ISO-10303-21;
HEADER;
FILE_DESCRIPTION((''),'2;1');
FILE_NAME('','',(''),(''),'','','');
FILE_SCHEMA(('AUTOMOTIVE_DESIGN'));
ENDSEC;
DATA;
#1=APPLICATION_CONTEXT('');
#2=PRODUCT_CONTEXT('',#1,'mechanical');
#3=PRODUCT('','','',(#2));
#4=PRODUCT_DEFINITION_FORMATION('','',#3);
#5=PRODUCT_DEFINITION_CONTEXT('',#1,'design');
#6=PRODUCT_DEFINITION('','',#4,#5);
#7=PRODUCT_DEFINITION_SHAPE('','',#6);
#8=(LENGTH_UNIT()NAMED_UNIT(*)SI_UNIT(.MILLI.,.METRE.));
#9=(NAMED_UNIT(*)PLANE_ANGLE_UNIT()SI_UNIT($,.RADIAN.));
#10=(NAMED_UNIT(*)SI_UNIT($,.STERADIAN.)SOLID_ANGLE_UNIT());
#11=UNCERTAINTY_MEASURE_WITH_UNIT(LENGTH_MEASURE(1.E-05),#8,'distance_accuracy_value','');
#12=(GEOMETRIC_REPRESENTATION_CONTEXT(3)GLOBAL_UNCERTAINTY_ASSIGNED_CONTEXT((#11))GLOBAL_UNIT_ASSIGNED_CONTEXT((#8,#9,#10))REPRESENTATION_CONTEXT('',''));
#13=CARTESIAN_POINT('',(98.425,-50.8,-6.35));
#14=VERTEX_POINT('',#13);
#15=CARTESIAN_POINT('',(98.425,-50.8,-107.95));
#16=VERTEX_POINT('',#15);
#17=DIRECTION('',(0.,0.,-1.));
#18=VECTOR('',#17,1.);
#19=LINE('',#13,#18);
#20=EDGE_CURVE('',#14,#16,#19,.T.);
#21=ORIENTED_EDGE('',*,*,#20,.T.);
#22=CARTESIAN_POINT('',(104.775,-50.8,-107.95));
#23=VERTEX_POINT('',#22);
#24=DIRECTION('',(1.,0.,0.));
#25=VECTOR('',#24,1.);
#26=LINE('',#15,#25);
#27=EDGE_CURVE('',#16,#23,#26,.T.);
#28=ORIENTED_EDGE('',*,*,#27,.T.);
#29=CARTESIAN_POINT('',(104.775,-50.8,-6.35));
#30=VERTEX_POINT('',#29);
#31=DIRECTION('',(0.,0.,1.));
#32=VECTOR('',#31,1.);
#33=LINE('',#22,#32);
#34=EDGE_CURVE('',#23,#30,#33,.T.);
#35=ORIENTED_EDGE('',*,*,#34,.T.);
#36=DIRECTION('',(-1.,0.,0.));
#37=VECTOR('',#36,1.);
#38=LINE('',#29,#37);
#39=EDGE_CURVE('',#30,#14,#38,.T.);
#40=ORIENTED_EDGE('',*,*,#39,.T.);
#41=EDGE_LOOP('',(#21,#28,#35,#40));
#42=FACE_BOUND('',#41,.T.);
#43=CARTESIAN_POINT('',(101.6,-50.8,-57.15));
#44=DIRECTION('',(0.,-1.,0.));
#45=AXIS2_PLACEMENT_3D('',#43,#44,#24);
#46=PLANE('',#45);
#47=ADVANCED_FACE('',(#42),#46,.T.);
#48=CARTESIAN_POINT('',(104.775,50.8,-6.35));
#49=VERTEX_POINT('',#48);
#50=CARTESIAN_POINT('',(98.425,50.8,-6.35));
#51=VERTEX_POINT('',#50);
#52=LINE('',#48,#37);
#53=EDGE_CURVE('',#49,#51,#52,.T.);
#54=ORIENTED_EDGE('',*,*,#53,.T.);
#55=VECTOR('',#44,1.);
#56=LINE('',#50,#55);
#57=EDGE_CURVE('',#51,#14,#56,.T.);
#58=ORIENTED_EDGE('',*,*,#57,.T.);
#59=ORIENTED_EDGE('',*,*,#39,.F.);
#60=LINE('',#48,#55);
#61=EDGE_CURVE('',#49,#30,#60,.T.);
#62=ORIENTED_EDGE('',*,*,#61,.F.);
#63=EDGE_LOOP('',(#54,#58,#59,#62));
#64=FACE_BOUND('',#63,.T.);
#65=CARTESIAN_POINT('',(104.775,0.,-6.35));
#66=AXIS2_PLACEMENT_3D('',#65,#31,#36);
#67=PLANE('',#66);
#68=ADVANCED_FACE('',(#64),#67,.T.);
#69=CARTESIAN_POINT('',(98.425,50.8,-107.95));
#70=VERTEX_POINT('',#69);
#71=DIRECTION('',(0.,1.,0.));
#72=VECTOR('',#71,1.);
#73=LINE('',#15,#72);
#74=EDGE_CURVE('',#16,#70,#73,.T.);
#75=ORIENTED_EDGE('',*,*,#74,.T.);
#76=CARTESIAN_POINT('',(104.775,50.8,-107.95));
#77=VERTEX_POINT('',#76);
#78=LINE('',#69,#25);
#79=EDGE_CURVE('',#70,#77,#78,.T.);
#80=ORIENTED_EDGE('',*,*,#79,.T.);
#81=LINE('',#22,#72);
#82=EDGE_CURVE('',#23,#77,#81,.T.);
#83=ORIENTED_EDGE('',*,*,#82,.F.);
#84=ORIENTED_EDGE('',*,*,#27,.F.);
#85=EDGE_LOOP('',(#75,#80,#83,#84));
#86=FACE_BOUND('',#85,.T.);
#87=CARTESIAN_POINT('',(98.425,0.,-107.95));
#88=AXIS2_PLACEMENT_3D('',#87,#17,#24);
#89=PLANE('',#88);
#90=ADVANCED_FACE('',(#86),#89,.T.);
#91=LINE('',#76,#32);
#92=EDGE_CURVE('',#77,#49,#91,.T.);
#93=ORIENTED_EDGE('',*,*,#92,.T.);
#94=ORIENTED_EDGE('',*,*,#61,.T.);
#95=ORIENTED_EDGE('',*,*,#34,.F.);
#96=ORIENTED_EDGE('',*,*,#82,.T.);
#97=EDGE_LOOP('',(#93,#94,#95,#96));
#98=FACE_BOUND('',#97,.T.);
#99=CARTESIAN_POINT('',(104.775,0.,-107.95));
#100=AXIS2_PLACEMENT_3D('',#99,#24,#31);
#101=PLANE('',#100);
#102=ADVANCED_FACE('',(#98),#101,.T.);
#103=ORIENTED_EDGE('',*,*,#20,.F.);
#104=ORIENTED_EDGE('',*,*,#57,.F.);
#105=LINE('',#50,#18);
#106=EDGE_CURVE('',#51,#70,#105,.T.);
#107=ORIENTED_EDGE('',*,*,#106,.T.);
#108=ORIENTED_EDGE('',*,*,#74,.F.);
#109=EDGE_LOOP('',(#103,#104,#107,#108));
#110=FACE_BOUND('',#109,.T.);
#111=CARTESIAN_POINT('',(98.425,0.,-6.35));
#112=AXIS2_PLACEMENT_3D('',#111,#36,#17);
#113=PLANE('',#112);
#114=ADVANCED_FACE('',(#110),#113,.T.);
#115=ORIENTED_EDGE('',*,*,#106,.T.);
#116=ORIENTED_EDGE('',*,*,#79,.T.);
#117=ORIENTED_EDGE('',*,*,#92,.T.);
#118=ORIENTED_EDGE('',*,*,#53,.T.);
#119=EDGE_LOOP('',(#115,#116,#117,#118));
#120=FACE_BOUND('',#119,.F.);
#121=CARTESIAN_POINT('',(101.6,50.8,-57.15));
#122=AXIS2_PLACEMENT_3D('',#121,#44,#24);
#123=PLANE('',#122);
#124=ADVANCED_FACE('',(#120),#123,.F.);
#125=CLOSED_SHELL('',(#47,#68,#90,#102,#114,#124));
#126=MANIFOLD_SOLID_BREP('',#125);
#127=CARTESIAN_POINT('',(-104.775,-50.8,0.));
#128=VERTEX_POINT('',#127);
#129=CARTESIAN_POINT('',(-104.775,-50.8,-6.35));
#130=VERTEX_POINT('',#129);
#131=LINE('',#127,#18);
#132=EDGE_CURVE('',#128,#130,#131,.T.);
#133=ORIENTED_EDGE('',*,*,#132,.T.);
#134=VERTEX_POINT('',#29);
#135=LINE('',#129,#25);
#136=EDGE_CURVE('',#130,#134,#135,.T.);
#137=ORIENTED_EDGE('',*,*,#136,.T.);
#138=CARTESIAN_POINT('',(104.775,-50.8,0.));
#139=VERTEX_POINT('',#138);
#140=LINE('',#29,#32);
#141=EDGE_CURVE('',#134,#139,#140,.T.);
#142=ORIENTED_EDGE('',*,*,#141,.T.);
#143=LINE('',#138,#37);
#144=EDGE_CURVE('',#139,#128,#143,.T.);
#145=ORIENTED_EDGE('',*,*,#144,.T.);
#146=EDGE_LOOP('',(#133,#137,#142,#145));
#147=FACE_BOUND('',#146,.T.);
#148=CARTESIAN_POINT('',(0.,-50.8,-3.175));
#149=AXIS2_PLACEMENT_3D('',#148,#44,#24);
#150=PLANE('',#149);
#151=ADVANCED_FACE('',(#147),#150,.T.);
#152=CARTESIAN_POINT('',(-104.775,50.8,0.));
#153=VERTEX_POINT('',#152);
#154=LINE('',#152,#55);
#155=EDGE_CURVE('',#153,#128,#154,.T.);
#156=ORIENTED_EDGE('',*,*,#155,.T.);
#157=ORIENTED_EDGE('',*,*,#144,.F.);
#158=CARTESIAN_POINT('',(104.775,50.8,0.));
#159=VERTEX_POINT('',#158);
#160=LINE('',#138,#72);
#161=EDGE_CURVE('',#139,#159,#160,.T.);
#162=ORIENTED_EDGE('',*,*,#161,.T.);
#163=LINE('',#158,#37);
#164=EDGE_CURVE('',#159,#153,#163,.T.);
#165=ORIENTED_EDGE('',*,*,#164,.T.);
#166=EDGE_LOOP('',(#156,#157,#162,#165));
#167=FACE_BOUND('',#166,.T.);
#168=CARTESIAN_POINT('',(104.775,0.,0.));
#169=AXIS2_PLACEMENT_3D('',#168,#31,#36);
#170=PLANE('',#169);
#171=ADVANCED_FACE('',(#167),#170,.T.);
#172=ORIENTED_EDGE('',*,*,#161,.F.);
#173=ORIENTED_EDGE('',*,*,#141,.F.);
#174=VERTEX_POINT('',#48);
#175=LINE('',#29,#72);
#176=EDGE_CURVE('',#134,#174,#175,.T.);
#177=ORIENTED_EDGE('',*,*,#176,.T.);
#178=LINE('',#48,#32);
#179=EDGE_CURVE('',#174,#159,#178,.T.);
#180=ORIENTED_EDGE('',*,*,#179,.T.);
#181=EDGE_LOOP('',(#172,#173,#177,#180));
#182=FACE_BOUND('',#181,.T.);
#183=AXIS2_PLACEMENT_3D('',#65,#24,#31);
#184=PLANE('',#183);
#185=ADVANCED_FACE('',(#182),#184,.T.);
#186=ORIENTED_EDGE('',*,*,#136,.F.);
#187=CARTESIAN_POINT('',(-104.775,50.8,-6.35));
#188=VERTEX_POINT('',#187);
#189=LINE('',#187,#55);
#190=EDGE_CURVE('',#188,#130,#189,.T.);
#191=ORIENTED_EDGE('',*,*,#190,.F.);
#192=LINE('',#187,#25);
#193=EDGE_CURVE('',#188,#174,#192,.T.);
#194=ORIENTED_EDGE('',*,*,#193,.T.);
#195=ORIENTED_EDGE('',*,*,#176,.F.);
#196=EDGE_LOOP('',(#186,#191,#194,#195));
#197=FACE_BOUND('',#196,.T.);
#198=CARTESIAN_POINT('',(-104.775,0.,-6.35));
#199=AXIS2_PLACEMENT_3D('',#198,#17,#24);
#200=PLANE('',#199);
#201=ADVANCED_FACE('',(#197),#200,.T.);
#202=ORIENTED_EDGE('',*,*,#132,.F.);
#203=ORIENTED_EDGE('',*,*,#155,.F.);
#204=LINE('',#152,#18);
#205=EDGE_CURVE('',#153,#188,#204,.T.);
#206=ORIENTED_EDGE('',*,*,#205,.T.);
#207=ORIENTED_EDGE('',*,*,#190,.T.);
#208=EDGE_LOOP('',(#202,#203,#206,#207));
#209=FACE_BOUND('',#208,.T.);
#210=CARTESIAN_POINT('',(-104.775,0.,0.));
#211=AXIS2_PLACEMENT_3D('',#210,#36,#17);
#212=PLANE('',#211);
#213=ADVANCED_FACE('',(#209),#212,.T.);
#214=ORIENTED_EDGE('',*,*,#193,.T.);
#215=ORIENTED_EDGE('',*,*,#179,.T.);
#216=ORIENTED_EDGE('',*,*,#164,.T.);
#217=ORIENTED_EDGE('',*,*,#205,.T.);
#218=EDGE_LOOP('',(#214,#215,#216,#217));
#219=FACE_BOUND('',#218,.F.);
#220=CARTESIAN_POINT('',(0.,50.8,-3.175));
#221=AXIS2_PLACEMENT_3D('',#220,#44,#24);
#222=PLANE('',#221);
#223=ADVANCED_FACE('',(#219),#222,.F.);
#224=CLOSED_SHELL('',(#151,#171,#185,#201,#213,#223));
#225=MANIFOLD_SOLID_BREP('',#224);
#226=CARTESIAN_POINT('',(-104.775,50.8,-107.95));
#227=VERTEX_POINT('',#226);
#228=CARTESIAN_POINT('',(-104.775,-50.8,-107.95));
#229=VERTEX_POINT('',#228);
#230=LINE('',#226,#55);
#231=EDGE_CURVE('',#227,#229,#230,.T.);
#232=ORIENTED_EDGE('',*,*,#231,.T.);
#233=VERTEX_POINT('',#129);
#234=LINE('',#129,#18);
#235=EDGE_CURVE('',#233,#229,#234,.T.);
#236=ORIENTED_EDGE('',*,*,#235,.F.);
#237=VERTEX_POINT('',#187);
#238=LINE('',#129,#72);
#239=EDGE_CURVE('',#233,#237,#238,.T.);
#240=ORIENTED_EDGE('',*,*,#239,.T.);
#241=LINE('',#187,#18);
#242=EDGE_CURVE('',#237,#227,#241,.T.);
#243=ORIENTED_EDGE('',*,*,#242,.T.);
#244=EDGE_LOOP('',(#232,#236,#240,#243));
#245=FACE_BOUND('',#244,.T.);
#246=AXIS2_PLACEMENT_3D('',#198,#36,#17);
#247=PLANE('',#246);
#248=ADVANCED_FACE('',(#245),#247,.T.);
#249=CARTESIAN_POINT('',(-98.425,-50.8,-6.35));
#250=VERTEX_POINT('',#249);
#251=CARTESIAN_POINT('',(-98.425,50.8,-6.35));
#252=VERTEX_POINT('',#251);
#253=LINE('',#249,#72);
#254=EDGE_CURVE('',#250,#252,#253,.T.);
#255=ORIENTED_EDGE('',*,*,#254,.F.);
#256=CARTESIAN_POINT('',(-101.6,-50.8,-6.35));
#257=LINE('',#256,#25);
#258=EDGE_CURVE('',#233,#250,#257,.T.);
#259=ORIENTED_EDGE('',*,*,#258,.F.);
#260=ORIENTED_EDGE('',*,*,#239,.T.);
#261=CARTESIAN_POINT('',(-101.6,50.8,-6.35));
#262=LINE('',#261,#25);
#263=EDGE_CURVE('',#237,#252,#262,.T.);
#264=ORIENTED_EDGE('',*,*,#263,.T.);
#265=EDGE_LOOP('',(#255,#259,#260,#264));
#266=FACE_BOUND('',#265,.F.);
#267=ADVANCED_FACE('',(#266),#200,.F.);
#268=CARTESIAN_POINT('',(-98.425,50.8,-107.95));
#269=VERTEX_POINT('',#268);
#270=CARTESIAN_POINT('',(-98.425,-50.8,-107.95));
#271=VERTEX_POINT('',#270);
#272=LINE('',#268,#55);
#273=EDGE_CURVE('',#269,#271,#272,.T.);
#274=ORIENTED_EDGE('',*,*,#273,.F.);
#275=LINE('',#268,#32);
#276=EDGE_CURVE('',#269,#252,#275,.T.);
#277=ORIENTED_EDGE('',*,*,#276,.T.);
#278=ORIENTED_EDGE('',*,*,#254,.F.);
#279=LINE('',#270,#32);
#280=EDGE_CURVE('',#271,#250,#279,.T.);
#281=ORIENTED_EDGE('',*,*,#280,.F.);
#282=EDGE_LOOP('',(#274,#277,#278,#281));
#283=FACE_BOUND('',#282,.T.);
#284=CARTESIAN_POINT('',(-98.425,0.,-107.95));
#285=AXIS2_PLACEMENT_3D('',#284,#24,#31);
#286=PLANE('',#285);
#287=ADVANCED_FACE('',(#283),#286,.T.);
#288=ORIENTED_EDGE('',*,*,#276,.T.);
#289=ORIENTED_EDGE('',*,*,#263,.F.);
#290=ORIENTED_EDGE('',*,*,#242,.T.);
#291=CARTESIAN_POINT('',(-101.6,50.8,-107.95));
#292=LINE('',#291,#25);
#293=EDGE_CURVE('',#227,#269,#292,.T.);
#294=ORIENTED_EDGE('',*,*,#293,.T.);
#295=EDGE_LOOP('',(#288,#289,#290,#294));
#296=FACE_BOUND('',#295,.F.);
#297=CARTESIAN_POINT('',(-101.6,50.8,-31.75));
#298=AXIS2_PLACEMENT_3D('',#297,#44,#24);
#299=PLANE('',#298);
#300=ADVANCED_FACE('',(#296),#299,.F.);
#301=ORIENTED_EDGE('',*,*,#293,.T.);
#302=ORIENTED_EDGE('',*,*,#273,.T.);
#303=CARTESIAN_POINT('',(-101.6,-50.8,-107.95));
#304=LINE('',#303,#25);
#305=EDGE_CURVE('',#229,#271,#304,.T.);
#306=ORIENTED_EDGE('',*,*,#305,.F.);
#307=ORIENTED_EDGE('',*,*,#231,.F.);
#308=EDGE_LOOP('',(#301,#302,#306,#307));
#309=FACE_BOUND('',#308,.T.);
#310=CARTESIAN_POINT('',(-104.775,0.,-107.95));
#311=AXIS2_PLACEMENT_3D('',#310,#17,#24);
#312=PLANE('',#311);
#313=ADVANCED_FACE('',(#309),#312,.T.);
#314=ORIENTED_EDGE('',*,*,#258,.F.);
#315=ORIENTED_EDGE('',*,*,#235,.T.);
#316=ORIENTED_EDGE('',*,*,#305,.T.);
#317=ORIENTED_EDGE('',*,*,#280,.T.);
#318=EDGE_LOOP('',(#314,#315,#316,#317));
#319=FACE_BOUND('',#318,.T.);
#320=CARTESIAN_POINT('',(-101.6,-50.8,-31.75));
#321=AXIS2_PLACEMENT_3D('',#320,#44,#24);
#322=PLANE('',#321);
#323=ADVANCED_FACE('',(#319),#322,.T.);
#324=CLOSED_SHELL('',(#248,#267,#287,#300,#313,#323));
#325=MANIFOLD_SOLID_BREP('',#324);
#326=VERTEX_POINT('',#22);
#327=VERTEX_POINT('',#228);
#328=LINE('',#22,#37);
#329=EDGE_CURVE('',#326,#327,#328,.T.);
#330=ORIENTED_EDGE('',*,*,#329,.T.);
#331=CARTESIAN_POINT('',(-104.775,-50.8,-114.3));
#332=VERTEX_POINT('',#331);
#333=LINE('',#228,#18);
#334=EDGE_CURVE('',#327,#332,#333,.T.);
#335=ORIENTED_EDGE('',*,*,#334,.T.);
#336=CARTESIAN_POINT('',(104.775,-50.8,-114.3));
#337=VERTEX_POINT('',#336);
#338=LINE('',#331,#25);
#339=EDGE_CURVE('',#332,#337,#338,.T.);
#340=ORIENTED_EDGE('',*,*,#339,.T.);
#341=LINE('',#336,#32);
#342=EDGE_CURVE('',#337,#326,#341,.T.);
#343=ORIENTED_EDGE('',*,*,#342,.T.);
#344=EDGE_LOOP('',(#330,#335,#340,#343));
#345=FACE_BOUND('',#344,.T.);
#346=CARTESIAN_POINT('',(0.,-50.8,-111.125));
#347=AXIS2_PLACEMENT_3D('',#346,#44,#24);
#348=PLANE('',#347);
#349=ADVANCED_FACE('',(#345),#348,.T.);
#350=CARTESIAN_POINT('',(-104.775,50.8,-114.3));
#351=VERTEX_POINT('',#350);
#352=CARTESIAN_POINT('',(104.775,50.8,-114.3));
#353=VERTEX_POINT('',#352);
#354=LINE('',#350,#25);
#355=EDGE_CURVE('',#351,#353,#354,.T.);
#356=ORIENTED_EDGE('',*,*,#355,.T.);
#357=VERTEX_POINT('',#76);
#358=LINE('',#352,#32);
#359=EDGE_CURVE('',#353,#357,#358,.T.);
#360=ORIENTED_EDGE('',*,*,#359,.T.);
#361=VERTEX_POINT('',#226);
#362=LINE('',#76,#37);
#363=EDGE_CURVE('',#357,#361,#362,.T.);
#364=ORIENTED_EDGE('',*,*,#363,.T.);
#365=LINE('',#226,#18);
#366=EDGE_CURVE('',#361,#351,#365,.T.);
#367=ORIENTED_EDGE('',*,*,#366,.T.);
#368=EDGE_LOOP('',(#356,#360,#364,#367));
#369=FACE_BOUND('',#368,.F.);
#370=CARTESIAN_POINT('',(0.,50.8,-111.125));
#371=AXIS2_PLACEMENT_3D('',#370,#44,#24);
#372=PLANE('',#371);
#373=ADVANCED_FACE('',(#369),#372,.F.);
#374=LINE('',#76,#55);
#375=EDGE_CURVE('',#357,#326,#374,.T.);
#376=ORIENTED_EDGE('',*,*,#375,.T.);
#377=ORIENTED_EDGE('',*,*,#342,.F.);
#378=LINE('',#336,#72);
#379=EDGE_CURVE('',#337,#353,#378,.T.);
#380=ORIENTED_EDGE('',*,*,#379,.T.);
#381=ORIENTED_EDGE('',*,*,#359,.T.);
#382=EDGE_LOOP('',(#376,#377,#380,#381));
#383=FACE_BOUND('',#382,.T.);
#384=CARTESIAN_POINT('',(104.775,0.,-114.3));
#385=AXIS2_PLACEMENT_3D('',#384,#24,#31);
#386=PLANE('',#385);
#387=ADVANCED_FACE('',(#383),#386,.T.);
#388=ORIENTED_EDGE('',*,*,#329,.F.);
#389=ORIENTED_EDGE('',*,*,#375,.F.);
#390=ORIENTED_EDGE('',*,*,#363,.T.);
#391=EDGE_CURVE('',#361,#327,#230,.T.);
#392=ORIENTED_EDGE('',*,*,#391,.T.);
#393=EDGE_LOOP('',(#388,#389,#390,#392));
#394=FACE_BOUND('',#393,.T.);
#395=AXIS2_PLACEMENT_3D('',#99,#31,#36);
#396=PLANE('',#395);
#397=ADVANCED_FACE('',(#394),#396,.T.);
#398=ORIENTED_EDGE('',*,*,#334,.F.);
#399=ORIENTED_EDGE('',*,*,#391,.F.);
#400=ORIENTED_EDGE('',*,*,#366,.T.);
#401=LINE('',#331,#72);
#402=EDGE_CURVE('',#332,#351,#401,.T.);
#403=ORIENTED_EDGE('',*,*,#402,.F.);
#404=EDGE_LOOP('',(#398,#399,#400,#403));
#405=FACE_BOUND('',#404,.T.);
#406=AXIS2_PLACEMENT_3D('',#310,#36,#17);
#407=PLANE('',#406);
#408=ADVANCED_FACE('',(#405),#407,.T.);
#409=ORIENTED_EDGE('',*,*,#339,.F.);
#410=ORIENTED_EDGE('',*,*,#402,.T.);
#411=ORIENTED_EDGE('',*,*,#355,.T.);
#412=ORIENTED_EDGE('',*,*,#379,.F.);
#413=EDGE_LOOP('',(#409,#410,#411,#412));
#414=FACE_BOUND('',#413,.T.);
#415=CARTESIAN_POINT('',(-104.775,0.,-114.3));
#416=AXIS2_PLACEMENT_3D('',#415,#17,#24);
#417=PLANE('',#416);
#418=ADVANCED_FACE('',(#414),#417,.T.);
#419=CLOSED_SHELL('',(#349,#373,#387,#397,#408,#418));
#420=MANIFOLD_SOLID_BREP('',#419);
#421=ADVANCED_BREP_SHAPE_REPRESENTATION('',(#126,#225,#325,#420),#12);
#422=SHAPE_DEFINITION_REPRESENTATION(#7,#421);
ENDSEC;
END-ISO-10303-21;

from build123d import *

# Parameters (mm, degrees)
F2_DEPTH      = 50.8
F1_W          = 6.35
F1_H          = 50.8
F3_DEPTH      = 50.8
F3_DEPTH_BACK = 50.8


# Not quite as in the source:
# - a variable given as a bare number and used for a length is read in inches; the dataset says mm whatever the document's units were


with BuildPart() as f2:
    # F1 (on Front) → F2 (new body, symmetric)
    with BuildSketch(Plane.XZ):
        Polygon((104.775, 0), (-104.775, 0), (-104.775, -6.35), (-98.425, -6.35), (98.425, -6.35), (104.775, -6.35), align=None)
    extrude(amount=F2_DEPTH, both=True)


with BuildPart() as f2b:
    # F1 (on Front) → F2, piece 2 (new body, symmetric)
    with BuildSketch(Plane.XZ):
        Polygon((104.775, -114.3), (104.775, -107.95), (98.425, -107.95), (-98.425, -107.95), (-104.775, -107.95), (-104.775, -114.3), align=None)
    extrude(amount=F2_DEPTH, both=True)


with BuildPart() as f3:
    # F1 (on Front) → F3 (new body, two sides)
    with BuildSketch(Plane.XZ) as f3_sk:
        with Locations((-101.6, -31.75)):
            Rectangle(F1_W, F1_H)
        with Locations((-101.6, -82.55)):
            Rectangle(F1_W, F1_H)
    extrude(amount=F3_DEPTH)
    extrude(f3_sk.sketch, amount=-F3_DEPTH_BACK)


with BuildPart() as f3b:
    # F1 (on Front) → F3, piece 2 (new body, two sides)
    with BuildSketch(Plane.XZ) as f3_2_sk:
        Polygon((104.775, -107.95), (104.775, -6.35), (98.425, -6.35), (98.425, -57.15), (98.425, -107.95), align=None)
    extrude(amount=F3_DEPTH)
    extrude(f3_2_sk.sketch, amount=-F3_DEPTH_BACK)


solid = Compound([f2.part, f2b.part, f3.part, f3b.part])
